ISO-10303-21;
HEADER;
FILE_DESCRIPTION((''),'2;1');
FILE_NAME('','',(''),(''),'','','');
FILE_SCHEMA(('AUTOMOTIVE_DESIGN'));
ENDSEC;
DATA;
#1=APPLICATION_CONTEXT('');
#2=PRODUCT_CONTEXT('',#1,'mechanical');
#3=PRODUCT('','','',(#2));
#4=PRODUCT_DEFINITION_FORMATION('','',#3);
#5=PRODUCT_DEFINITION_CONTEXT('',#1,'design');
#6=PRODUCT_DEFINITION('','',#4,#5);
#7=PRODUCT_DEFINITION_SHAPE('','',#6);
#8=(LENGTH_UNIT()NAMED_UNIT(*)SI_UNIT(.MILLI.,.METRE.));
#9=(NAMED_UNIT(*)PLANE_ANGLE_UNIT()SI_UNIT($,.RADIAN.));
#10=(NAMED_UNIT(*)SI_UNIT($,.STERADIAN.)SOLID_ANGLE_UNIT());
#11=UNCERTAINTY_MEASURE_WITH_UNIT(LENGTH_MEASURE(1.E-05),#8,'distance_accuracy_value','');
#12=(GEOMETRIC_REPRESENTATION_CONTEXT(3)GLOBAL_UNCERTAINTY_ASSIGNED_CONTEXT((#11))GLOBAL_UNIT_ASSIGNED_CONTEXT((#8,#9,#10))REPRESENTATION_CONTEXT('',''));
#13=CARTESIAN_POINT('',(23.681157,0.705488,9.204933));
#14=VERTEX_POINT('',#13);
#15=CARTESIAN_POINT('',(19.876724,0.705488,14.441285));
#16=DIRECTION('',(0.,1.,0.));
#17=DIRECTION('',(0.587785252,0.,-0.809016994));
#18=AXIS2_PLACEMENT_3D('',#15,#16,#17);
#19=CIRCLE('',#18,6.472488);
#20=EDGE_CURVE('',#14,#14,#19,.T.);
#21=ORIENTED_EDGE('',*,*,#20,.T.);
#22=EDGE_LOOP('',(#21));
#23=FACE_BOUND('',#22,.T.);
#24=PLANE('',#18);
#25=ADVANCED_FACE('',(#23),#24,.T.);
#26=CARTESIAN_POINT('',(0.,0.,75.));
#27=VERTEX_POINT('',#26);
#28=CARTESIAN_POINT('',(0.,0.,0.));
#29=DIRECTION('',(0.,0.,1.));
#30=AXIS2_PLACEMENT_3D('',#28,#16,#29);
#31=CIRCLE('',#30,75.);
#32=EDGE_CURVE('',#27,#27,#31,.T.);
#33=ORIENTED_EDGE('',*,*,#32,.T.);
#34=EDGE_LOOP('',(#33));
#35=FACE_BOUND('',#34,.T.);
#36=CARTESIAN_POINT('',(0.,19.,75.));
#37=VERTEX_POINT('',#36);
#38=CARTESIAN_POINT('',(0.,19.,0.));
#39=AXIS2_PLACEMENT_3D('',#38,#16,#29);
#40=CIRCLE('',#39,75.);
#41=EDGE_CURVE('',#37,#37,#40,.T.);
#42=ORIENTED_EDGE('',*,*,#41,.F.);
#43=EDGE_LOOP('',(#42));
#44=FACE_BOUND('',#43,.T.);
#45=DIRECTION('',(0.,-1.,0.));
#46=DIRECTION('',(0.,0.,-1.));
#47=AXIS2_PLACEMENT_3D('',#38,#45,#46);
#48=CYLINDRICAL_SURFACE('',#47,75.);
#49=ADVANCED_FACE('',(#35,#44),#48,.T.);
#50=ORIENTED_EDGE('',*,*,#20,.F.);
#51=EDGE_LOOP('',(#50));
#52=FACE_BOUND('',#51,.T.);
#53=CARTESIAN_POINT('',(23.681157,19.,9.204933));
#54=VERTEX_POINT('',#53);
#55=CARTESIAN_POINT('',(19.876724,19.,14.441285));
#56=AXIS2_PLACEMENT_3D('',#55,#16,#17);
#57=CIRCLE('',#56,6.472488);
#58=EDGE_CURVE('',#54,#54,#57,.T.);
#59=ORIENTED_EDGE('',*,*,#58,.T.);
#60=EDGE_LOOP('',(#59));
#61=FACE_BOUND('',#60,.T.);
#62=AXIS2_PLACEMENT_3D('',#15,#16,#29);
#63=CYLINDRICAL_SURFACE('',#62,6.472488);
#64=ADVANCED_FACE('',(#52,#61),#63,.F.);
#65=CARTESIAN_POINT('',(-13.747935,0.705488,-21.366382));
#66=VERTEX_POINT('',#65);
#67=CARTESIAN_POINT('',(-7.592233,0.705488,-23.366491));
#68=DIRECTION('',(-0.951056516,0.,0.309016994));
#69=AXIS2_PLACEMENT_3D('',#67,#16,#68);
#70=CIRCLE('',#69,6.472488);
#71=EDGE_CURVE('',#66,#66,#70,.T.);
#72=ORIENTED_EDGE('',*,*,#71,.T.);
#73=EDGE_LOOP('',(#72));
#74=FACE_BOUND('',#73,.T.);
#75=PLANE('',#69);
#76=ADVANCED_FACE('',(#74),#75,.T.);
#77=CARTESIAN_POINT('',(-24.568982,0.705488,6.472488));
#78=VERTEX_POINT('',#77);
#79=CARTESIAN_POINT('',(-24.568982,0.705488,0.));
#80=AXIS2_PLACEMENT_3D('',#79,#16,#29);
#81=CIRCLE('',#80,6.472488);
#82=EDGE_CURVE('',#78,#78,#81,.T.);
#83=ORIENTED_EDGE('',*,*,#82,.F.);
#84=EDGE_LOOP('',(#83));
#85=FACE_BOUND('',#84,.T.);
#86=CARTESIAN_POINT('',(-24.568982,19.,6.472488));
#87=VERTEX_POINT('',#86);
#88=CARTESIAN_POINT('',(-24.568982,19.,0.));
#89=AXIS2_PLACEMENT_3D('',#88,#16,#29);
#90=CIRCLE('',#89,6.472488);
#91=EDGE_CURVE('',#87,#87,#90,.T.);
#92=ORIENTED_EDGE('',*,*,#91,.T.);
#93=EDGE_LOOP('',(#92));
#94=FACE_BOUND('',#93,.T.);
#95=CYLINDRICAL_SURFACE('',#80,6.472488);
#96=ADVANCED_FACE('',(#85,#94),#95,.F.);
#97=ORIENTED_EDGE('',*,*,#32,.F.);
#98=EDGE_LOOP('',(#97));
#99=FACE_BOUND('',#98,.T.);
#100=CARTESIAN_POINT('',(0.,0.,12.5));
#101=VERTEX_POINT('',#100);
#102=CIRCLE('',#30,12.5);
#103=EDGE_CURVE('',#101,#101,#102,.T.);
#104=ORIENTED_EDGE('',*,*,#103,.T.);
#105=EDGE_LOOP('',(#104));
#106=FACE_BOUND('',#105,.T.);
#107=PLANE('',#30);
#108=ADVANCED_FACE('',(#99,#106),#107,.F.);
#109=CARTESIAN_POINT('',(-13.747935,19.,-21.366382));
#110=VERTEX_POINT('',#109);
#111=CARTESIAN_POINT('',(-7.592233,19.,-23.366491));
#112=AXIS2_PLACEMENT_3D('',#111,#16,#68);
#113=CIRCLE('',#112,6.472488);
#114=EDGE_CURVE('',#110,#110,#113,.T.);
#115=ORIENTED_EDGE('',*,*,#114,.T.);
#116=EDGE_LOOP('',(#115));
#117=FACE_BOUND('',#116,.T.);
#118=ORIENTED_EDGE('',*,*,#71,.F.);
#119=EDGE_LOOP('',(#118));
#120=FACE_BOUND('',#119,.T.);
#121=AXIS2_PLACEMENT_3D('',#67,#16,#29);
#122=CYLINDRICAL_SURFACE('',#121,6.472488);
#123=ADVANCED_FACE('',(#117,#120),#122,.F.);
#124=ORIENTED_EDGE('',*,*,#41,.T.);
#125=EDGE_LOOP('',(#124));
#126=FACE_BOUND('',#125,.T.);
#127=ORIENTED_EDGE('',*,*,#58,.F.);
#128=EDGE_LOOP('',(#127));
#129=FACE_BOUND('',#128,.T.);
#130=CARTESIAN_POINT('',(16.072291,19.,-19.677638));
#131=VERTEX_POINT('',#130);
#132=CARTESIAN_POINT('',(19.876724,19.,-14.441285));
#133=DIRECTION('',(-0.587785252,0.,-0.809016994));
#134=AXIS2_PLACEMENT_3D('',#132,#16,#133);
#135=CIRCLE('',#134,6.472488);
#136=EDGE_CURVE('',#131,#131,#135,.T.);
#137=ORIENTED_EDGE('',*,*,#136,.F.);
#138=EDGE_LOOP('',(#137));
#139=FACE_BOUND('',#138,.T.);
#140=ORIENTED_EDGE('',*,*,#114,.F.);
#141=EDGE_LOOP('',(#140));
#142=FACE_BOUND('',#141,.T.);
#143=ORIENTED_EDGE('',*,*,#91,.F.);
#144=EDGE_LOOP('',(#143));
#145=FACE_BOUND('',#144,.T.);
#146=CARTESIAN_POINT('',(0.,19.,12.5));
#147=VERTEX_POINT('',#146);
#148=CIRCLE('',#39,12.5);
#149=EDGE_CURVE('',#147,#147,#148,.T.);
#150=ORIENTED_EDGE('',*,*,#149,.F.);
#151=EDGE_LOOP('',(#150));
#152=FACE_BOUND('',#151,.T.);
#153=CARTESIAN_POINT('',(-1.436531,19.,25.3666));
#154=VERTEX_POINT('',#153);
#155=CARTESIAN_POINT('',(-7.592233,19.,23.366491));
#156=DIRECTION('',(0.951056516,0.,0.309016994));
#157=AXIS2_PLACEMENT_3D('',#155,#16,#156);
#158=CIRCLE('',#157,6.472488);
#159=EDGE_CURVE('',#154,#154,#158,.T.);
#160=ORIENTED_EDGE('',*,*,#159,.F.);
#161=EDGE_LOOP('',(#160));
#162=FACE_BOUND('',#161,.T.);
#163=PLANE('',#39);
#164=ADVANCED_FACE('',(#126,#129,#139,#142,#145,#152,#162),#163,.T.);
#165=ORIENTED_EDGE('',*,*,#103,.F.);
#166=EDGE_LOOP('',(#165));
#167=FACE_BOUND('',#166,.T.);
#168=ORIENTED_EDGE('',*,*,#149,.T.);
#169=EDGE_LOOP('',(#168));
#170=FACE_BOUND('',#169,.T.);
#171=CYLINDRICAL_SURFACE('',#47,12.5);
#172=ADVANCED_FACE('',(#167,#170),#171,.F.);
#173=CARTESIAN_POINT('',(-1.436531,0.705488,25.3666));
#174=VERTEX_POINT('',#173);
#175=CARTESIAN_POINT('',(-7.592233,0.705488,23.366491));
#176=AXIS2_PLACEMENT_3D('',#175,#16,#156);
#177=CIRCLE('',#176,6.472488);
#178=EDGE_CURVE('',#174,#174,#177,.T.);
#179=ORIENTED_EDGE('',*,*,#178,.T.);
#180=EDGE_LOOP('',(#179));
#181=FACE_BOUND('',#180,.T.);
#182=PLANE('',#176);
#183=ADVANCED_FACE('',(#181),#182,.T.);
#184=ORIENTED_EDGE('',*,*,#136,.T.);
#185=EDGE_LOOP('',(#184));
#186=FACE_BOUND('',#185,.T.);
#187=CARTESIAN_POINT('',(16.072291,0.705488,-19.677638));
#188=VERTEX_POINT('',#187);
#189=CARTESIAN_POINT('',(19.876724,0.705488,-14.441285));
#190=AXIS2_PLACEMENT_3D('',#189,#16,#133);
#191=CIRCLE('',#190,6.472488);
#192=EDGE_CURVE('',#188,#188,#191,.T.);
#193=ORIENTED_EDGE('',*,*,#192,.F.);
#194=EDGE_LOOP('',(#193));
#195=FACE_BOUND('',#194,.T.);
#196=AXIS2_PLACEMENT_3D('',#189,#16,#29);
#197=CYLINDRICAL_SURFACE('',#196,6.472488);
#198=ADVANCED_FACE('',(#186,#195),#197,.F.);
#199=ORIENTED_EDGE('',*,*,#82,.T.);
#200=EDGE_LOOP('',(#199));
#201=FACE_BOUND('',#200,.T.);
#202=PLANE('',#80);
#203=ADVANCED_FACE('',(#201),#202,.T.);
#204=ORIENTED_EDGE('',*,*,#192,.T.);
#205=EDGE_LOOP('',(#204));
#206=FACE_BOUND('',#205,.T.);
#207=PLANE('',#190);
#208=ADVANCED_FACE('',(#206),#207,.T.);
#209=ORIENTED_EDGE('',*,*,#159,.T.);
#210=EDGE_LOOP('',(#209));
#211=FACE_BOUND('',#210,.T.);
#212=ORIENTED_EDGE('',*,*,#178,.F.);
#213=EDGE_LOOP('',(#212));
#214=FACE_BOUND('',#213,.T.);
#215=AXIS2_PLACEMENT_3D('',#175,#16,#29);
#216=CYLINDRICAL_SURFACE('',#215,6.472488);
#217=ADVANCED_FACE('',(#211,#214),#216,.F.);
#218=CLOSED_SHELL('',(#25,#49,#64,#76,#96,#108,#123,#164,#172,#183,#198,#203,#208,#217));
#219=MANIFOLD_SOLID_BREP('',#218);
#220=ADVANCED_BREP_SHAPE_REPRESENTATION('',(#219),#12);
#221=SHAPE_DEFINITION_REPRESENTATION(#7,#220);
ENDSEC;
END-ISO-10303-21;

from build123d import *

# Parameters (mm, degrees)
SKETCH1_R           = 75
BOSS_EXTRUDE1_DEPTH = 19
SKETCH2_R           = 12.5
CUT_EXTRUDE1_DEPTH  = 108.75435026
SKETCH3_R           = 6.472488018
CUT_EXTRUDE2_DEPTH  = 18.29451223
CIRPATTERN1_COUNT   = 5


with BuildPart() as part:
    # Sketch1 → Boss-Extrude1 (new body)
    with BuildSketch(Plane(origin=(0, 0, 0), x_dir=(1, 0, 0), z_dir=(0, 1, 0))):
        Circle(SKETCH1_R)
    extrude(amount=BOSS_EXTRUDE1_DEPTH)

    # Sketch2 → Cut-Extrude1 (cut, through all)
    with BuildSketch(Plane(origin=(0, 0, 0), x_dir=(1, 0, 0), z_dir=(0, 1, 0))):
        Circle(SKETCH2_R)
    extrude(amount=CUT_EXTRUDE1_DEPTH, mode=Mode.SUBTRACT)

    # Sketch3 → Cut-Extrude2 (cut)
    with BuildSketch(Plane(origin=(0, 19, 0), x_dir=(1, 0, 0), z_dir=(0, 1, 0))):
        with Locations((-24.568982349, 0)):
            Circle(SKETCH3_R)
    cut_extrude2 = extrude(amount=-CUT_EXTRUDE2_DEPTH, mode=Mode.SUBTRACT)

    # CirPattern1: Cut-Extrude2 ×5 about axis
    cirpattern1_axis = Axis((0, 0, 0), (0, 1, 0))
    for i in range(1, CIRPATTERN1_COUNT):
        add(cut_extrude2.rotate(cirpattern1_axis, i * 360 / CIRPATTERN1_COUNT), mode=Mode.SUBTRACT)


solid = part.part
